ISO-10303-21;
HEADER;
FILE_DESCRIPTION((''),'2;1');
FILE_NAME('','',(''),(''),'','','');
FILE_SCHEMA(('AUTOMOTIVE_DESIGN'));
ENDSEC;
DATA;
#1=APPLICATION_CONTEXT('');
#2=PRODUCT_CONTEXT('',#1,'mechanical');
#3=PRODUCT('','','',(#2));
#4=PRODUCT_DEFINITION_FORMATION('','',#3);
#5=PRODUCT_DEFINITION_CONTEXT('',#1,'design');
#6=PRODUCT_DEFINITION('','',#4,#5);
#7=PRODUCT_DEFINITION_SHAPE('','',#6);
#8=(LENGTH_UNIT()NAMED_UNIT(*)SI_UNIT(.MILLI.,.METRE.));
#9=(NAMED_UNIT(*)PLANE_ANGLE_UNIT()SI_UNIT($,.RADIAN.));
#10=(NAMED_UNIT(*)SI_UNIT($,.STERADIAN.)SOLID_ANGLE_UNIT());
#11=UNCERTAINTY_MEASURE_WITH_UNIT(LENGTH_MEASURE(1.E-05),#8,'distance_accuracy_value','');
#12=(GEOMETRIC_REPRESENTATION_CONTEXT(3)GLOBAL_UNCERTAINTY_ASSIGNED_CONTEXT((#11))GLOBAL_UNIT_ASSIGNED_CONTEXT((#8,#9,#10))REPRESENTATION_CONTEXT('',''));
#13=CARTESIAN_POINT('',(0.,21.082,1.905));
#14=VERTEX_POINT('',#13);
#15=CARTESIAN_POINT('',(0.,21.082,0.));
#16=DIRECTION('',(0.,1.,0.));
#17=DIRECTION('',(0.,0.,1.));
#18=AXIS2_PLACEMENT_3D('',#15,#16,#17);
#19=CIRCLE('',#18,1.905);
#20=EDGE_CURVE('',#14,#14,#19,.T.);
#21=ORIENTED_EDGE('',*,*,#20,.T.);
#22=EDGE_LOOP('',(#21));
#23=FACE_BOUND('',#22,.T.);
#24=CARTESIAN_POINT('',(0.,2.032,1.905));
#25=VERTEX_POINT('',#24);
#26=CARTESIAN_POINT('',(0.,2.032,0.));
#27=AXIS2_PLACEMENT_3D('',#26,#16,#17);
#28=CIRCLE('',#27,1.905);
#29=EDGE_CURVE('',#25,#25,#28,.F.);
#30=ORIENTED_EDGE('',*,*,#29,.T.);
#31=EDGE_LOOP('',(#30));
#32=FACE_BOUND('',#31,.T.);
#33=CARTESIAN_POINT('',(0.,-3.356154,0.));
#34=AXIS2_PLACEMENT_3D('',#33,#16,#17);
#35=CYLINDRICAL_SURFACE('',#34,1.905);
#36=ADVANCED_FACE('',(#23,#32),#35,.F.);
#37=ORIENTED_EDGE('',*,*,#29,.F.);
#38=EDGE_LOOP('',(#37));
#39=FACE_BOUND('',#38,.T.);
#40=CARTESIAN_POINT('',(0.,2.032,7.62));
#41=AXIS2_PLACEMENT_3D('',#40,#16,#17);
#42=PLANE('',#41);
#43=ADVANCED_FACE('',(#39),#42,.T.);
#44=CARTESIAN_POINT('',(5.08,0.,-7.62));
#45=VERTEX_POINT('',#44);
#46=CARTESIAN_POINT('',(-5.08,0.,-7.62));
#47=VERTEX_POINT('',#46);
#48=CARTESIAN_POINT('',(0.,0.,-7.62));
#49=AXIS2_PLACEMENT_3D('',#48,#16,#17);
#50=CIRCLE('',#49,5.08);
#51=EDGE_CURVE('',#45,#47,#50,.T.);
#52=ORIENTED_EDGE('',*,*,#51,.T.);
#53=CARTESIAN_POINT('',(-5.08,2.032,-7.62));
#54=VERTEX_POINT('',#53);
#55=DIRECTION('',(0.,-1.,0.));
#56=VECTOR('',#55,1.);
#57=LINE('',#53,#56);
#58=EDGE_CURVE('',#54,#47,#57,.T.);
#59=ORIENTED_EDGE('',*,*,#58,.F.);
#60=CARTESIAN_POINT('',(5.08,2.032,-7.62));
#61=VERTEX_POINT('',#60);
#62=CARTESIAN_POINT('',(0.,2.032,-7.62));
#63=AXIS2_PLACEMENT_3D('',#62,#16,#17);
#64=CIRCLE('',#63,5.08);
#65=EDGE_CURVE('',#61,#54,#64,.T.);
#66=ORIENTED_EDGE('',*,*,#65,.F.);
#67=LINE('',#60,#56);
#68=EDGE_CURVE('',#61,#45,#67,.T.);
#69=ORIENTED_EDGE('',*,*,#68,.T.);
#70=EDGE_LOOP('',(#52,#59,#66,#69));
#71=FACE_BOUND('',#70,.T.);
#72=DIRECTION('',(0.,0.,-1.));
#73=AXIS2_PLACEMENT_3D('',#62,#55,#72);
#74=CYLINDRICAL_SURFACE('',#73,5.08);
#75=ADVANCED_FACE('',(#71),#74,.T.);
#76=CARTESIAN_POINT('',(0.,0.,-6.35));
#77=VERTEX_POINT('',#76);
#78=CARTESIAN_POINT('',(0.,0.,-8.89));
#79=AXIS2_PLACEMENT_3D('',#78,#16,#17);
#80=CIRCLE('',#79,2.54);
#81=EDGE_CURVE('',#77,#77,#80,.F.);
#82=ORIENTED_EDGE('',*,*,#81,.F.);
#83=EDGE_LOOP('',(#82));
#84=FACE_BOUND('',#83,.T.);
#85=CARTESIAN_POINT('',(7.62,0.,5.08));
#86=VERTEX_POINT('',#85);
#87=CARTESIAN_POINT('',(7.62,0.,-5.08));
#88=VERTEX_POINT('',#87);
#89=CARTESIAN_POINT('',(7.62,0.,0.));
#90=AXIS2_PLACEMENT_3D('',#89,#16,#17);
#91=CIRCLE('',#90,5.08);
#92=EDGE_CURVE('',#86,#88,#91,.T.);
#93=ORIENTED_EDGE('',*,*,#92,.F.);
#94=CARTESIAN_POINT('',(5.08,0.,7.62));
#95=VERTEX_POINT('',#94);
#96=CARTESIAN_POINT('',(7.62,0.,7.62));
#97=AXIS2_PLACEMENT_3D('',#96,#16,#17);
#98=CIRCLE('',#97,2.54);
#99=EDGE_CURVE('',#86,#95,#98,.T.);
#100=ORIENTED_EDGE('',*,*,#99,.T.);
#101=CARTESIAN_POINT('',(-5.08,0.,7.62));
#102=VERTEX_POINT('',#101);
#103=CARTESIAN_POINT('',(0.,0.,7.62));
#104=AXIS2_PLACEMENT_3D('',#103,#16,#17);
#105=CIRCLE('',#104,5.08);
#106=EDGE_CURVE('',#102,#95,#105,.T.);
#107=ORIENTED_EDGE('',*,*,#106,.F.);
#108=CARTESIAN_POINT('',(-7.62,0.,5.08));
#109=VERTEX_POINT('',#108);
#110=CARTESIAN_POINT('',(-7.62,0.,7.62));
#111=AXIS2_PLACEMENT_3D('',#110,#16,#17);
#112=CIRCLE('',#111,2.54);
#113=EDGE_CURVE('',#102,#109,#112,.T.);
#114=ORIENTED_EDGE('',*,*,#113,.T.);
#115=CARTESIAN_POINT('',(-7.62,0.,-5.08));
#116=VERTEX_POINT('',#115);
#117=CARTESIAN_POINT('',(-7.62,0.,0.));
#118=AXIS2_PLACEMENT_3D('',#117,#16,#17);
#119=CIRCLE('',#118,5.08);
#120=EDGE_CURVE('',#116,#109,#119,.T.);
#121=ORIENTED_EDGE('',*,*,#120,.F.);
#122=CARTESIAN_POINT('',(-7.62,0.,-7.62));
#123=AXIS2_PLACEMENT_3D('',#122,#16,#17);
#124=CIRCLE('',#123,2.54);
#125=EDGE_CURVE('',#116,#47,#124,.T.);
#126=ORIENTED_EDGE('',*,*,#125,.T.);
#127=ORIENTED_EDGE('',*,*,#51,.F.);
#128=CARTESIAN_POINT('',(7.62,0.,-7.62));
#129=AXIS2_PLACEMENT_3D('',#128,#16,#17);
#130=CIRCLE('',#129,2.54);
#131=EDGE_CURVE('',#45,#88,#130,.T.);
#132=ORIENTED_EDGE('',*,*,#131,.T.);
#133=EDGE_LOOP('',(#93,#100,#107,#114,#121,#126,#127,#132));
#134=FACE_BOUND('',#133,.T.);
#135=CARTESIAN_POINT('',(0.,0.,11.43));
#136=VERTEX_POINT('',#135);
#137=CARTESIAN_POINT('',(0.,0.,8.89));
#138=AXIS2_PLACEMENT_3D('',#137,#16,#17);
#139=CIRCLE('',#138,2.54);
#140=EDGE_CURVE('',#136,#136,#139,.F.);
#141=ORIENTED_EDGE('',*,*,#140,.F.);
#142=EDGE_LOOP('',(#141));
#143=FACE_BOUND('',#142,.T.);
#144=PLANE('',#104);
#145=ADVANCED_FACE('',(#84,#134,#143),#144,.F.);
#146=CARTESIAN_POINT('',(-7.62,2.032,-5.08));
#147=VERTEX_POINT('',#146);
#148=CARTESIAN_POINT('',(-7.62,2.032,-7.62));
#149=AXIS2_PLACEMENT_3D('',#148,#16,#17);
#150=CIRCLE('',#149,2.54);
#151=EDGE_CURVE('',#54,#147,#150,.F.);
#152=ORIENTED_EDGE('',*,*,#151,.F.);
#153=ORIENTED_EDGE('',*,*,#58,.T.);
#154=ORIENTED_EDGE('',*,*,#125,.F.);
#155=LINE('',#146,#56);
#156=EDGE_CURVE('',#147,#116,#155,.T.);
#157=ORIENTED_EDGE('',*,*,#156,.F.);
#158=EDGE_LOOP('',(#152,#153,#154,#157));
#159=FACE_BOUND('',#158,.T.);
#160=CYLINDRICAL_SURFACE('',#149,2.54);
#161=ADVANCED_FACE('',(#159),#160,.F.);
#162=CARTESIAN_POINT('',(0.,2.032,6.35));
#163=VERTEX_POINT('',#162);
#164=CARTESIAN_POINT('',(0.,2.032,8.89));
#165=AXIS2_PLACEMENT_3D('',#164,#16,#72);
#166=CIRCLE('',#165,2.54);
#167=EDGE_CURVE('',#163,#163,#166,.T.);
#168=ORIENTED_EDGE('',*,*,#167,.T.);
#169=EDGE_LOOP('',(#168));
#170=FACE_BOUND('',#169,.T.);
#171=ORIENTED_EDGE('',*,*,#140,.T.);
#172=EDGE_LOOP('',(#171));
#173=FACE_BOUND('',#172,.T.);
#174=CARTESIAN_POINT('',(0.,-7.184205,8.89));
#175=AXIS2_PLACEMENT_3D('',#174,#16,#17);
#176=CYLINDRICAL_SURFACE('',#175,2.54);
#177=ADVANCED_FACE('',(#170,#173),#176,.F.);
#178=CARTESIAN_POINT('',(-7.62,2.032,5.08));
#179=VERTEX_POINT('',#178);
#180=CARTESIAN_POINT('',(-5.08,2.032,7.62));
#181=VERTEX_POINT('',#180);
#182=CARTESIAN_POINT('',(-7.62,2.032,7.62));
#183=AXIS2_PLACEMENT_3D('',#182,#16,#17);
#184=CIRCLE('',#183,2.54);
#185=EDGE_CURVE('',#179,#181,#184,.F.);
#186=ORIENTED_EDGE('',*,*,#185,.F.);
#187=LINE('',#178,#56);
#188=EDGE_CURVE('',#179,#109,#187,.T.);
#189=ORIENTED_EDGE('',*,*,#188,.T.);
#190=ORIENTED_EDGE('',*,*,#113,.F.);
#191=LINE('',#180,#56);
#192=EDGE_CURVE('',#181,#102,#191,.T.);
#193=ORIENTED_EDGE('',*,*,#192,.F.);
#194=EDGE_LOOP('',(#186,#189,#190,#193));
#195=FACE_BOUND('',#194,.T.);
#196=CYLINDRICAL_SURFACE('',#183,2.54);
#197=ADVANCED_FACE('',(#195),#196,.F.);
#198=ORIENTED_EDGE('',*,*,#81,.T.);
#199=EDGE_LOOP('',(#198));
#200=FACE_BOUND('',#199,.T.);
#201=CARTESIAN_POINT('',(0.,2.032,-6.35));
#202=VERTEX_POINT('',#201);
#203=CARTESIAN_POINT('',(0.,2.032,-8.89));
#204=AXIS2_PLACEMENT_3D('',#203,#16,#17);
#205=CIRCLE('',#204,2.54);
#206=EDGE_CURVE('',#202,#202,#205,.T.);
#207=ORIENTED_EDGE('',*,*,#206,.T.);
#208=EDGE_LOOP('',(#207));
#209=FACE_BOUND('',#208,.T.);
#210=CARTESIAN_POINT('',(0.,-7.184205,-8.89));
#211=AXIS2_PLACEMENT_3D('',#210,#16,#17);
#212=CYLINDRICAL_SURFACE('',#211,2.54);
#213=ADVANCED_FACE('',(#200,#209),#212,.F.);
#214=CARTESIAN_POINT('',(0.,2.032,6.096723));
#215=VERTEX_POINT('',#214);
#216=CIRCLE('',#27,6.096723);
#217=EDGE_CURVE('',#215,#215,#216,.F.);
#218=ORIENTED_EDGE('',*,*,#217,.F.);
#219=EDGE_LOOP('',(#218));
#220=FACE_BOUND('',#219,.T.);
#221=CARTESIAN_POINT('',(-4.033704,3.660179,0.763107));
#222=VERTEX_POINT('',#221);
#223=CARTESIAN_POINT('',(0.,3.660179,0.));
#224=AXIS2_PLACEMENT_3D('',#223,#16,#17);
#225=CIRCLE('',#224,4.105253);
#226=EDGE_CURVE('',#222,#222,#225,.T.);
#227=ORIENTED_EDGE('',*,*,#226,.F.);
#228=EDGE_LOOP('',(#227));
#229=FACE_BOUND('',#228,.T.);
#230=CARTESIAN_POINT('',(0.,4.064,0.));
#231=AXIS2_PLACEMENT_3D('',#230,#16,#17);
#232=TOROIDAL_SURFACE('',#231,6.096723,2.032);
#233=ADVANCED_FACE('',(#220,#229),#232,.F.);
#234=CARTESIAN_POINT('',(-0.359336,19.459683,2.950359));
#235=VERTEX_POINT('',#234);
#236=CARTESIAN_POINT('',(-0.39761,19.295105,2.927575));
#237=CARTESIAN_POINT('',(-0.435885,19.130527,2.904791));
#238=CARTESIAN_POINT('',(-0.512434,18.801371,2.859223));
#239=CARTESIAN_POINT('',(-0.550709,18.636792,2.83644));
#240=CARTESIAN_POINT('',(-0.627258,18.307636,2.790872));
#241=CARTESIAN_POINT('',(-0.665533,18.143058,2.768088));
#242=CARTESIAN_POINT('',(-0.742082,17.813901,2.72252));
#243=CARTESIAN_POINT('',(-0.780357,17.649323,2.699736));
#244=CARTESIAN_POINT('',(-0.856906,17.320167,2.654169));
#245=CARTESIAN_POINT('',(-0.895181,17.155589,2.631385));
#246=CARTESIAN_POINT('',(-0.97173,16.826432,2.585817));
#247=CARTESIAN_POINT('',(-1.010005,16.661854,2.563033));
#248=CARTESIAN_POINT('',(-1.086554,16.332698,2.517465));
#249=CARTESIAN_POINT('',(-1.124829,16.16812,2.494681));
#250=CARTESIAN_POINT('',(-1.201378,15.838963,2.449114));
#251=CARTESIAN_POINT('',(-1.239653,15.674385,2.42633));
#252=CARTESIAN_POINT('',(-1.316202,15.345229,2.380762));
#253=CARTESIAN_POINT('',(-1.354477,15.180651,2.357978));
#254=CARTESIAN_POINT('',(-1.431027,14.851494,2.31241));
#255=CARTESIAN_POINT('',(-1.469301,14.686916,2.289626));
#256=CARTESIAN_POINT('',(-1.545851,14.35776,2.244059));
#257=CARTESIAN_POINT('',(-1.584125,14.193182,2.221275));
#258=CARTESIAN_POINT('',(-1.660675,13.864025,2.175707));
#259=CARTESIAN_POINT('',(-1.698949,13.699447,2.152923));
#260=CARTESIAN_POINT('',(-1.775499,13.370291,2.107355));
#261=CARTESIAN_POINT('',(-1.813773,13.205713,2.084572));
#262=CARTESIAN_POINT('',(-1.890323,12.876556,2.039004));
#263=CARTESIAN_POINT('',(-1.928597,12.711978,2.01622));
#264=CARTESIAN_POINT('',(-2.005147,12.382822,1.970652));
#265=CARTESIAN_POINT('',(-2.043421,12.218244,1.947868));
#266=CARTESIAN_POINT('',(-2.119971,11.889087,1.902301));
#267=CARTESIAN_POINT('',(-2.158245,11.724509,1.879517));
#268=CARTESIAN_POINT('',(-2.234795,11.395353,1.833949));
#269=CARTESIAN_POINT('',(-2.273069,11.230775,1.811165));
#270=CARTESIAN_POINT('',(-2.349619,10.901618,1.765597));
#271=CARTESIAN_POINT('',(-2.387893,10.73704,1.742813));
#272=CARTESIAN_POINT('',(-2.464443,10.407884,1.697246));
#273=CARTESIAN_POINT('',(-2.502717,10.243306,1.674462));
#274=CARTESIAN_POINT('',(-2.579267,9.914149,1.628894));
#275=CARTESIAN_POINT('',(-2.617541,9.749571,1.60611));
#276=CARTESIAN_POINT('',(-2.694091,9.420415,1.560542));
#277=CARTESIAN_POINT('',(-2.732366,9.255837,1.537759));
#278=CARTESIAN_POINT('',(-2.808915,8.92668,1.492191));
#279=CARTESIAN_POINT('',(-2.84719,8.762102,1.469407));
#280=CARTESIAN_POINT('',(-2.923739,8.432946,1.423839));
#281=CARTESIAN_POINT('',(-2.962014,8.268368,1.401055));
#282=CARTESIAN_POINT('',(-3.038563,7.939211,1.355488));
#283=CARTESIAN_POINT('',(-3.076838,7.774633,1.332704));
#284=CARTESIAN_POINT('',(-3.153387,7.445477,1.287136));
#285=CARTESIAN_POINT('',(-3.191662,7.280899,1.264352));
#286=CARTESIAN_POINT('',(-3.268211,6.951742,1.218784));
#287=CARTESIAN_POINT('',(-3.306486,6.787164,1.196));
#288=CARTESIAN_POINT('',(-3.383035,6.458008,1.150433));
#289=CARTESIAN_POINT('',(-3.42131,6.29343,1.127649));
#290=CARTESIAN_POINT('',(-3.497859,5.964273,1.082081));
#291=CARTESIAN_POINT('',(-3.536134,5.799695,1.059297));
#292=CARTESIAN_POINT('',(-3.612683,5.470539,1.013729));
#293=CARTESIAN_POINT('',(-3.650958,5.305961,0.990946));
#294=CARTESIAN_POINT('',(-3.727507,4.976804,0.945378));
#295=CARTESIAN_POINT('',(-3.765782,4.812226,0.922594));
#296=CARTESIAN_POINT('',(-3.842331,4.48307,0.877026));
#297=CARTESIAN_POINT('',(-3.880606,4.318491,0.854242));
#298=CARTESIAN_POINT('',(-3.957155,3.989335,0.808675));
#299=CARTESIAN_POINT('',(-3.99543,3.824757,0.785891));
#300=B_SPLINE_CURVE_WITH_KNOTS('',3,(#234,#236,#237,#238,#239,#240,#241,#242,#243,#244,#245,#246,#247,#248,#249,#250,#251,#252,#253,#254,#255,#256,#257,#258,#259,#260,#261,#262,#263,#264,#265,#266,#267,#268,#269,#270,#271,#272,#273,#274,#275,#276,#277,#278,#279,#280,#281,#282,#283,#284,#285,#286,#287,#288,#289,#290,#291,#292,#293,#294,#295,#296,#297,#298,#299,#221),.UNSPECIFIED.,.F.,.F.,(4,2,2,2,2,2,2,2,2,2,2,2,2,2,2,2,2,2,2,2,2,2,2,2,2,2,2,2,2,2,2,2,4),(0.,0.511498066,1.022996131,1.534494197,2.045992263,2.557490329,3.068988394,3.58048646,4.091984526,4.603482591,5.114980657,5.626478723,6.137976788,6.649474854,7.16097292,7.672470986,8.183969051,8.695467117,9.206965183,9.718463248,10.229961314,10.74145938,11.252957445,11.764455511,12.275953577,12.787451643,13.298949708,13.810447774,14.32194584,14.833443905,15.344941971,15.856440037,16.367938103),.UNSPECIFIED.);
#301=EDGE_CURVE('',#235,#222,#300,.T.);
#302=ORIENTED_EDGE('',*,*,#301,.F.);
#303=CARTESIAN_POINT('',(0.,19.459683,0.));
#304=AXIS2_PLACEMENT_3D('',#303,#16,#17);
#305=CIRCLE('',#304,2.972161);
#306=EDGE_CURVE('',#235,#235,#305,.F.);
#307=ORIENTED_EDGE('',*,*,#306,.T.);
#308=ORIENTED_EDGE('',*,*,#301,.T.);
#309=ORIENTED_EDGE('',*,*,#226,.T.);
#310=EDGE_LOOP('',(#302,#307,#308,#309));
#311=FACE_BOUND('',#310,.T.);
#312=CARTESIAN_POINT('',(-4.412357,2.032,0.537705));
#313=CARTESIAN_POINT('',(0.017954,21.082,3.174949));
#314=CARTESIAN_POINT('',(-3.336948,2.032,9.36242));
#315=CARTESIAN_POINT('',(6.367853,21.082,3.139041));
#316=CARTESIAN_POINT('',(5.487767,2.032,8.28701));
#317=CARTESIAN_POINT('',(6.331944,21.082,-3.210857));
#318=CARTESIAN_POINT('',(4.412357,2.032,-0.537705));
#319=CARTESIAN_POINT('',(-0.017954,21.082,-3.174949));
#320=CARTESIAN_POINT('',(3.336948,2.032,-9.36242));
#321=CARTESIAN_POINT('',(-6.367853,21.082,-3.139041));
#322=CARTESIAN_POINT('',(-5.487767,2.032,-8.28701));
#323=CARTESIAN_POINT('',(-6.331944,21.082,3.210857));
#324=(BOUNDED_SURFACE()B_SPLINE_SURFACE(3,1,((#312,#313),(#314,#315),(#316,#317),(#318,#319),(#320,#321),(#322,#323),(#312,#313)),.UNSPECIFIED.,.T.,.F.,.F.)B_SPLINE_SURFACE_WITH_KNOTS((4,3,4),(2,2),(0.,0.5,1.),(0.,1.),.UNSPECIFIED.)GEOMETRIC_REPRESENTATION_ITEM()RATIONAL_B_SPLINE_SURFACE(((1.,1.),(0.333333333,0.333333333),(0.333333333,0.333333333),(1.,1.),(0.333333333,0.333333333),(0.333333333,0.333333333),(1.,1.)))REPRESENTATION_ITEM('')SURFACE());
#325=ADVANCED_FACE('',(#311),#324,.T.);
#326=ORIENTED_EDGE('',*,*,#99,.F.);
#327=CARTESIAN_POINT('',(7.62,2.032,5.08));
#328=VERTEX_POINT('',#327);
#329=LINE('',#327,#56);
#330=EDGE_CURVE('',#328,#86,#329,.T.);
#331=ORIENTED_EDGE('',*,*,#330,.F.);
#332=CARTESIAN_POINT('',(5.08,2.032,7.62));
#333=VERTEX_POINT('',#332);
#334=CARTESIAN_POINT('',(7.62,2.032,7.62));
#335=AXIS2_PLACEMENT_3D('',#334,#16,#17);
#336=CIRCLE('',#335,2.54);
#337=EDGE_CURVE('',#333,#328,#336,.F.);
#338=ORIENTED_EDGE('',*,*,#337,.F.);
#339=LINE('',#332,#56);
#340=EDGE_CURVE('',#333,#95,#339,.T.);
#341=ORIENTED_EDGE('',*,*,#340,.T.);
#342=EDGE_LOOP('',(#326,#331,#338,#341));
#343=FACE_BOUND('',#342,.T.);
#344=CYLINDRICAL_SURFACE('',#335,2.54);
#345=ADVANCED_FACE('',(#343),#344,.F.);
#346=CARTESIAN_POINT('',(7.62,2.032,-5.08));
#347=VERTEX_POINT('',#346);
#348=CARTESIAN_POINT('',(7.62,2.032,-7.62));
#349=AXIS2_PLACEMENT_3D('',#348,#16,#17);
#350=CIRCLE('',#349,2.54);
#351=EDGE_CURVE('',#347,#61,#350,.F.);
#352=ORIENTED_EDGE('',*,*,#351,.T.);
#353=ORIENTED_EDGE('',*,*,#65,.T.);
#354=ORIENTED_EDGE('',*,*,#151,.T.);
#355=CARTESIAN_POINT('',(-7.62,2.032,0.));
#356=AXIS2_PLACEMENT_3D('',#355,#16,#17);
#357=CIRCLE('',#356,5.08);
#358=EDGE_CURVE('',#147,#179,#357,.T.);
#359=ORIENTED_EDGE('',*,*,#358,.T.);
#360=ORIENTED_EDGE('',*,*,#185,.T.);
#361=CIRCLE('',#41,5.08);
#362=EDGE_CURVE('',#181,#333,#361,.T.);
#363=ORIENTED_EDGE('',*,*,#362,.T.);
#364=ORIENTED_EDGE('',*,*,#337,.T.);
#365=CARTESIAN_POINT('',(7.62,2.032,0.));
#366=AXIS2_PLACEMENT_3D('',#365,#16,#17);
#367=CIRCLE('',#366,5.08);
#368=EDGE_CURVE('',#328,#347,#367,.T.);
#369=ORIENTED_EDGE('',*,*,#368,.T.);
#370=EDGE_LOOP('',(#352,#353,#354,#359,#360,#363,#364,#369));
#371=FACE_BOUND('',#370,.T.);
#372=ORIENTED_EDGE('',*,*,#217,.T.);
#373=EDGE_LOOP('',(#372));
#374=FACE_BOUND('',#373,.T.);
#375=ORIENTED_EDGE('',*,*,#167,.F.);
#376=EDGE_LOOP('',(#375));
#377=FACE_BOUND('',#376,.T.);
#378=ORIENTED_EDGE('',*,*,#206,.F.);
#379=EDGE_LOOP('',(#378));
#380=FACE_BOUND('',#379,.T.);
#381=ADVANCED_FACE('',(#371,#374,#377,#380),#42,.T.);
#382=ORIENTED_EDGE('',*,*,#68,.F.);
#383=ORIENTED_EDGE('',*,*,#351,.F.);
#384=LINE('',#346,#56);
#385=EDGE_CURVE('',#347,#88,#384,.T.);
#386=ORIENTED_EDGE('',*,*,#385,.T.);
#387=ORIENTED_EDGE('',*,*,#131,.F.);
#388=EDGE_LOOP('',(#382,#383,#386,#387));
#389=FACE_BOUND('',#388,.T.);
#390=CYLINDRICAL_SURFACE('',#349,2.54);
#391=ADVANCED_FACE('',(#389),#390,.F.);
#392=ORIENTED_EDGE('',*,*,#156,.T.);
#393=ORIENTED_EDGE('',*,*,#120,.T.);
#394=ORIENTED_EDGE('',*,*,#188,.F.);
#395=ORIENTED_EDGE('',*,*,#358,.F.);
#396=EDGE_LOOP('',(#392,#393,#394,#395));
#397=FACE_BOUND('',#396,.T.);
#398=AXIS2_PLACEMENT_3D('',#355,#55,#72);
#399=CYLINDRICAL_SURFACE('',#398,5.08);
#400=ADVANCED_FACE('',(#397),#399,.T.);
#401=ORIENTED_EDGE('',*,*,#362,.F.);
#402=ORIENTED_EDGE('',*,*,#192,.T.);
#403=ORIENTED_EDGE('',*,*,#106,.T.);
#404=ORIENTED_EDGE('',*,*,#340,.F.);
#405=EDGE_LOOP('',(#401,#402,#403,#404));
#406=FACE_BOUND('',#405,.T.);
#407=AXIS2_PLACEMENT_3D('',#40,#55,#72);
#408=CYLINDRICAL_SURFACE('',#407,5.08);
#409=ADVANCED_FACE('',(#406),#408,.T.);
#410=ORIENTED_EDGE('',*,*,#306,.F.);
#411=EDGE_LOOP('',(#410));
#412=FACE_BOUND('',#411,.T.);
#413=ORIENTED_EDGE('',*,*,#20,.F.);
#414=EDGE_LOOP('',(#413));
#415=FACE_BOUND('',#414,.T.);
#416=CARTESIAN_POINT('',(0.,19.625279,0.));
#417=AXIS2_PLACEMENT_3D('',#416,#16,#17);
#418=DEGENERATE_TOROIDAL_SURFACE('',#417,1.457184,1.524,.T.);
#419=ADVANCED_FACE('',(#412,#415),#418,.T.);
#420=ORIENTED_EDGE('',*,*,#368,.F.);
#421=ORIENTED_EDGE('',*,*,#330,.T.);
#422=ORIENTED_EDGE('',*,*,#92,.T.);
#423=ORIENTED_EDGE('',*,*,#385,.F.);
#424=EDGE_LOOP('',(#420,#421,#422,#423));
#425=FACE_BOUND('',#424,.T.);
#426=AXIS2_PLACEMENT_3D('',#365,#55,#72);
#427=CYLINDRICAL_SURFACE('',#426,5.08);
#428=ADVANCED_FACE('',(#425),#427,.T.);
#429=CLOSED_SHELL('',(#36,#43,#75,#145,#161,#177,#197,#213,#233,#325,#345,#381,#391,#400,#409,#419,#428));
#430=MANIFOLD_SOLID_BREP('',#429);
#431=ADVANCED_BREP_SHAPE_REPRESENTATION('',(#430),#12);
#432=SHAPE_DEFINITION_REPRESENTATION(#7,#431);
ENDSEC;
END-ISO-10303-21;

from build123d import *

# Parameters (mm, degrees)
BOSS_EXTRUDE1_DEPTH = 2.032
FILLET1_R           = 2.54
SKETCH4_R           = 1.905
CUT_EXTRUDE1_DEPTH  = 19.05
SKETCH5_R           = 2.54
CUT_EXTRUDE2_DEPTH  = 2.032
FILLET6_R           = 2.032


with BuildPart() as part:
    # Sketch1 → Boss-Extrude1 (new body)
    with BuildSketch(Plane(origin=(0, 0, 0), x_dir=(1, 0, 0), z_dir=(0, 1, 0))):
        with BuildLine():
            Line((-5.08, -7.62), (-5.08, -5.08))
            Line((-5.08, -5.08), (-7.62, -5.08))
            ThreePointArc((-7.62, -5.08), (-12.7, 0), (-7.62, 5.08))
            Line((-7.62, 5.08), (-5.08, 5.08))
            Line((-5.08, 5.08), (-5.08, 7.62))
            ThreePointArc((-5.08, 7.62), (0, 12.7), (5.08, 7.62))
            Line((5.08, 7.62), (5.08, 5.08))
            Line((5.08, 5.08), (7.62, 5.08))
            ThreePointArc((7.62, 5.08), (12.7, 0), (7.62, -5.08))
            Line((7.62, -5.08), (5.08, -5.08))
            Line((5.08, -5.08), (5.08, -7.62))
            ThreePointArc((5.08, -7.62), (0, -12.7), (-5.08, -7.62))
        make_face()
    extrude(amount=BOSS_EXTRUDE1_DEPTH)

    # Fillet1
    fillet1_edges = [part.edges().sort_by_distance(p)[0] for p in [
        (-5.08, 1.016, -5.08),
        (-5.08, 1.016, 5.08),
        (5.08, 1.016, 5.08),
        (5.08, 1.016, -5.08),
    ]]
    fillet(fillet1_edges, radius=FILLET1_R - 0.0001)  # a hair under: the kernel refuses the full size

    # Loft1: read off the stored shape, not the designer's step
    # Loft1: loft between two sections, ruled curve by curve
    loft1_from = [
        Edge.make_bspline([(-4.412357467, 2.032, 0.537704925), (-3.336947617, 2.032, 9.362419858), (5.487767316, 2.032, 8.287010009), (4.412357467, 2.032, -0.537704925), (3.336947617, 2.032, -9.362419858), (-5.487767316, 2.032, -8.287010009), (-4.412357467, 2.032, 0.537704925)], [0, 0, 0, 0, 0.5, 0.5, 0.5, 1, 1, 1, 1], 3, [1, 0.333333333, 0.333333333, 1, 0.333333333, 0.333333333, 1]),
    ]
    loft1_to = [
        Edge.make_bspline([(0.017954106, 21.082, 3.174949236), (6.367852578, 21.082, 3.139041023), (6.331944365, 21.082, -3.210857448), (-0.017954106, 21.082, -3.174949236), (-6.367852578, 21.082, -3.139041023), (-6.331944365, 21.082, 3.210857448), (0.017954106, 21.082, 3.174949236)], [0, 0, 0, 0, 0.5, 0.5, 0.5, 1, 1, 1, 1], 3, [1, 0.333333333, 0.333333333, 1, 0.333333333, 0.333333333, 1]),
    ]
    loft1 = Solid(Shell([*[Face.make_surface_from_curves(loft1_from[k], loft1_to[k]) for k in range(1)], Face(Wire(loft1_from)), Face(Wire(loft1_to))]))
    add(loft1)

    # Sketch4 → Cut-Extrude1 (cut)
    with BuildSketch(Plane(origin=(0, 21.082, 0), x_dir=(1, 0, 0), z_dir=(0, 1, 0))):
        with Locations(Location((0, 0, 0), (0, 0, 270))):
            Circle(SKETCH4_R)
    extrude(amount=-CUT_EXTRUDE1_DEPTH, mode=Mode.SUBTRACT)

    # Sketch5 → Cut-Extrude2 (cut)
    with BuildSketch(Plane(origin=(0, 2.032, 0), x_dir=(1, 0, 0), z_dir=(0, 1, 0))):
        with Locations(Location((0, 8.89, 0), (0, 0, 270))):
            Circle(SKETCH5_R)
        with Locations(Location((0, -8.89, 0), (0, 0, 270))):
            Circle(SKETCH5_R)
    extrude(amount=-CUT_EXTRUDE2_DEPTH, mode=Mode.SUBTRACT)

    # Fillet6
    fillet6_edges = [part.edges().sort_by_distance(p)[0] for p in [
        (4.412357467, 2.032, -0.537704925),
    ]]
    fillet(fillet6_edges, radius=FILLET6_R)

    # Fillet7: read off the stored shape, not the designer's step
    # Fillet7 outline → Fillet7 (revolve, cut)
    with BuildSketch(Plane.XY):
        with BuildLine():
            Line((2.972160789, 19.459683195), (3.175, 19.459683195))
            Line((3.175, 19.459683195), (3.175, 21.082))
            Line((3.175, 21.082), (1.905, 21.082))
            ThreePointArc((1.905, 21.082), (2.730414906, 20.462810482), (2.972160789, 19.459683195))
        make_face()
    revolve(axis=Axis((0, 0, 0), (0, 1, 0)), mode=Mode.SUBTRACT)


solid = part.part
